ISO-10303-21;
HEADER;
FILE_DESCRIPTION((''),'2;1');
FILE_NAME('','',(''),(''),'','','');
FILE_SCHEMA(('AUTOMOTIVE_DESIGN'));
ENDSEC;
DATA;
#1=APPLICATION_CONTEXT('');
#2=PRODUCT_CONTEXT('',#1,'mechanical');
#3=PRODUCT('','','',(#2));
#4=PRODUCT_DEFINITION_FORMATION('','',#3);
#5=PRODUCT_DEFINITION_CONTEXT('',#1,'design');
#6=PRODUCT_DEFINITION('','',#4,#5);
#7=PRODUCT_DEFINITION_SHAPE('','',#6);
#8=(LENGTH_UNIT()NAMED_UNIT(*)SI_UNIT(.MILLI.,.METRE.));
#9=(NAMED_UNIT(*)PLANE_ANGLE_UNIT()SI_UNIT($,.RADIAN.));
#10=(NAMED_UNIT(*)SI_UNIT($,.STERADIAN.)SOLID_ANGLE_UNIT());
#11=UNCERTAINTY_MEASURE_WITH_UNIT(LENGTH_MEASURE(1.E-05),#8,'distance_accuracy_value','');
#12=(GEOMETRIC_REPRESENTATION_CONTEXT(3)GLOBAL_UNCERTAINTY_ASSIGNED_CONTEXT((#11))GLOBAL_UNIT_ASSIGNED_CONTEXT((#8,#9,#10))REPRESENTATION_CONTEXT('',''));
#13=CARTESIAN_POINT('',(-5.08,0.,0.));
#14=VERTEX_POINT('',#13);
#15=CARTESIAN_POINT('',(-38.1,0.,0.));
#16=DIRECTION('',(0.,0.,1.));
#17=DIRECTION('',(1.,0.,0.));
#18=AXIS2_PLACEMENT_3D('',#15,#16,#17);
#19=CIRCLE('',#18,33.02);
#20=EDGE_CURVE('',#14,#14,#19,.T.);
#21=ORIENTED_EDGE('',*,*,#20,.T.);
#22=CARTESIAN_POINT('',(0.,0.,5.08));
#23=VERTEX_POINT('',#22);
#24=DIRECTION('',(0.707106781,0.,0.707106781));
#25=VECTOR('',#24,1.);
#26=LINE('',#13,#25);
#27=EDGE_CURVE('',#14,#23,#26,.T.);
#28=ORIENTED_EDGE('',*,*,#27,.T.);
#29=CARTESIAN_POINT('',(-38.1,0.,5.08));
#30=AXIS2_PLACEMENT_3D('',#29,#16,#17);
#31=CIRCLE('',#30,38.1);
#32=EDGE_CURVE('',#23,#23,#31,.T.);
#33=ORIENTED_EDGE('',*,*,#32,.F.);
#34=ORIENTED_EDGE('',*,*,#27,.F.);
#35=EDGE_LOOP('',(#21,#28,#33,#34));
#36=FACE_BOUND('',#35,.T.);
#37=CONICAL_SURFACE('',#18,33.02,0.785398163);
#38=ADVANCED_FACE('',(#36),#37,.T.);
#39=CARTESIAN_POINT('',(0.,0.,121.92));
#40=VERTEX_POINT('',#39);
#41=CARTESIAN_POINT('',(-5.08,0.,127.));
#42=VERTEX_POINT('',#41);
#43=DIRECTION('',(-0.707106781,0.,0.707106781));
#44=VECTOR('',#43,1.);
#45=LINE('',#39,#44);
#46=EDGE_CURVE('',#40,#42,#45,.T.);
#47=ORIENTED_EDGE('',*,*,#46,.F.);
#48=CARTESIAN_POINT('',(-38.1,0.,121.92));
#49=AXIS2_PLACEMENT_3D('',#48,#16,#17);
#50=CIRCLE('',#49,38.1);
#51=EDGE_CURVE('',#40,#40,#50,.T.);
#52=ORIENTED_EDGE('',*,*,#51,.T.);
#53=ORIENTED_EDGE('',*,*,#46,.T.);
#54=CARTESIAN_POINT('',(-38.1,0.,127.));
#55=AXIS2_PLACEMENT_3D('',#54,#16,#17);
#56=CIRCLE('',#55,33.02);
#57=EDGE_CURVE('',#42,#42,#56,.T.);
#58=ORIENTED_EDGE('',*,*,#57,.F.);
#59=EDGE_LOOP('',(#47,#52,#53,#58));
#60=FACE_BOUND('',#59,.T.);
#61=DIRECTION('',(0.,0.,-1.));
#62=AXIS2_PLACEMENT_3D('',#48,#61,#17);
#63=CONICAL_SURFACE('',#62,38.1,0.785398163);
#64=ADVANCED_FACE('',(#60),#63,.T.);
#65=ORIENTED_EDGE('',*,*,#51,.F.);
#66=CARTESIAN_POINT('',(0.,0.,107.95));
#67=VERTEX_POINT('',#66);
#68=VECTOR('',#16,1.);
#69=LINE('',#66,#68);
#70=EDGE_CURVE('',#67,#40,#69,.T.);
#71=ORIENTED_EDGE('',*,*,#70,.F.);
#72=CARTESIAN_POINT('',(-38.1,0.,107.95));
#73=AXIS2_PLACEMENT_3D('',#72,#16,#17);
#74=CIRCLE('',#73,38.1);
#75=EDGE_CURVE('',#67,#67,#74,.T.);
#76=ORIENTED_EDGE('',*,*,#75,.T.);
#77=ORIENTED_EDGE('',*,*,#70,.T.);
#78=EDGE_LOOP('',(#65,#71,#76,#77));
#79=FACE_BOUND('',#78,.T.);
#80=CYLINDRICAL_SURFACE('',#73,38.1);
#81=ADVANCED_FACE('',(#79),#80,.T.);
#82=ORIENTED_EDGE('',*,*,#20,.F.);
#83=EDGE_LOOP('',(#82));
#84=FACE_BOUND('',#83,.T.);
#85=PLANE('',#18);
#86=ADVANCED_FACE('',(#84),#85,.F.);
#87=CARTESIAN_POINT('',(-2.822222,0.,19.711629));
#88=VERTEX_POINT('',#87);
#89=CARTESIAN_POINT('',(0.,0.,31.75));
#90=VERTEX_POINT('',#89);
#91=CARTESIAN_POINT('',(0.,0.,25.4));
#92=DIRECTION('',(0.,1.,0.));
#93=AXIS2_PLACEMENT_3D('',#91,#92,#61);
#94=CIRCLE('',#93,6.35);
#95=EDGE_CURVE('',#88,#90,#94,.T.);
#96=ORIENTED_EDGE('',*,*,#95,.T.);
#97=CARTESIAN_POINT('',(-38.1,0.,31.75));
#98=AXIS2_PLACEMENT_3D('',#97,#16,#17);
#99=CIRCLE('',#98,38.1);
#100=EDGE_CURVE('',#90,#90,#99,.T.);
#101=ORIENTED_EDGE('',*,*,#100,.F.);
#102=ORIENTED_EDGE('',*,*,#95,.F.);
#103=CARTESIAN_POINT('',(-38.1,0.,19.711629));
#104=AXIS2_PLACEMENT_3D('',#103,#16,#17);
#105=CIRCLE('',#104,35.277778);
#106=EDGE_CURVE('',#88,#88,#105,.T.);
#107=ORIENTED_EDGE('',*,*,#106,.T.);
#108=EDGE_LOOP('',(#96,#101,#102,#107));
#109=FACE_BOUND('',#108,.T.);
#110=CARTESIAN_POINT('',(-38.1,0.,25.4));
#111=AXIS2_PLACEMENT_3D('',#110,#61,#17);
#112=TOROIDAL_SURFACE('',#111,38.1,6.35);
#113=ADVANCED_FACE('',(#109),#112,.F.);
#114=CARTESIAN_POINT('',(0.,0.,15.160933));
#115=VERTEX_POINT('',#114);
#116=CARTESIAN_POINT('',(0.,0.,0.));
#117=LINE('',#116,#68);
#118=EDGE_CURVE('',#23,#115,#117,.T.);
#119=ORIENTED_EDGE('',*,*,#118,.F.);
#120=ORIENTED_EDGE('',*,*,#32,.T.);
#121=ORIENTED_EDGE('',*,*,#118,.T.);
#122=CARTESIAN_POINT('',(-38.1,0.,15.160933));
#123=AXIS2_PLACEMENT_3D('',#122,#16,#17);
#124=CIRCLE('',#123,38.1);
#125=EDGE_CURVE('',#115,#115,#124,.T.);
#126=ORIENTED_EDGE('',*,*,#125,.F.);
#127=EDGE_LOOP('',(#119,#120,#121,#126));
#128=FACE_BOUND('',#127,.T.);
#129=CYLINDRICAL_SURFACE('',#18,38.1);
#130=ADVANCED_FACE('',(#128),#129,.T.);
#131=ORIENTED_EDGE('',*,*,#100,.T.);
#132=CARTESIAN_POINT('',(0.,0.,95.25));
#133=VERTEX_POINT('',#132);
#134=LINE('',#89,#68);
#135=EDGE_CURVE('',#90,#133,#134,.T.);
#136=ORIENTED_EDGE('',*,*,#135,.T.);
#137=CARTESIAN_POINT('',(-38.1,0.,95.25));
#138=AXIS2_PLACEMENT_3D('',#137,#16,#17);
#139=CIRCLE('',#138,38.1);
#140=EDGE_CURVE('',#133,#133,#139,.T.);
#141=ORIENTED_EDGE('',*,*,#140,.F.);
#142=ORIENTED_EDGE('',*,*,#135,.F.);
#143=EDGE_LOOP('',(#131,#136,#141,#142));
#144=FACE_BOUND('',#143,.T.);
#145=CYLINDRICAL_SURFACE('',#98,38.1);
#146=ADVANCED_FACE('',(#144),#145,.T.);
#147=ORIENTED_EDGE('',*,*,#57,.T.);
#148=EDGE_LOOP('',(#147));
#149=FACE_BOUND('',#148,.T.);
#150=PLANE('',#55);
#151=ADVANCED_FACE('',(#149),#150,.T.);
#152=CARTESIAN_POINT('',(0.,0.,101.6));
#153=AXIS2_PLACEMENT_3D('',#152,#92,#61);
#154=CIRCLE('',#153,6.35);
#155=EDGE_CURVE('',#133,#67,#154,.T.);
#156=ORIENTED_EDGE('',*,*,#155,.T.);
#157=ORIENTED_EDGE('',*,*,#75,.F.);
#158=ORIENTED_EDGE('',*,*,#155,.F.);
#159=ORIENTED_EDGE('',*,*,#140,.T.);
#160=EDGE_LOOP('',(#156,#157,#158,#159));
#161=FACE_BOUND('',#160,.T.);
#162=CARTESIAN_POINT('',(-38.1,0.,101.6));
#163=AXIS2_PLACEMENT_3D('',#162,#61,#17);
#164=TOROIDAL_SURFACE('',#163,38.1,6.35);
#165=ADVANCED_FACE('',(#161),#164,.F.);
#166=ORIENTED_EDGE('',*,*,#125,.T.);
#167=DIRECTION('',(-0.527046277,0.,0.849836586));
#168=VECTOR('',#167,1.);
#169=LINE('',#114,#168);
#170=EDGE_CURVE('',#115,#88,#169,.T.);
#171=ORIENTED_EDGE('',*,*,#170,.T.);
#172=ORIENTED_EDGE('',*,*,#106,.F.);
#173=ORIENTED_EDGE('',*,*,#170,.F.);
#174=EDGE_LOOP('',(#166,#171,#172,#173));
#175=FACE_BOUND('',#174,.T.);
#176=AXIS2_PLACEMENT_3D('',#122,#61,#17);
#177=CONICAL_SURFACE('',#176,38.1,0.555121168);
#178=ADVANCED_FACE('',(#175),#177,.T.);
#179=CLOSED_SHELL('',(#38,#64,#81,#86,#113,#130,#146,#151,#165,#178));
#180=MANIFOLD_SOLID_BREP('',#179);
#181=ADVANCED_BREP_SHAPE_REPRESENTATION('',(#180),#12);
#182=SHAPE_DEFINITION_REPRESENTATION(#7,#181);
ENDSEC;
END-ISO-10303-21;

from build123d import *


# Not quite as in the source:
# - a fillet or chamfer that OpenCascade refuses, or shapes differently, is made with other operations: its cross-section is extruded or revolved along the edge and cut away or added


with BuildPart() as f1:
    # F0 (on Front) → F1 (revolve)
    with BuildSketch(Plane.XZ):
        with BuildLine():
            Line((-38.1, 0), (0, 0))
            Line((0, 0), (0, 19.05))
            ThreePointArc((0, 19.05), (-6.35, 25.4), (0, 31.75))
            Line((0, 31.75), (0, 95.25))
            ThreePointArc((0, 95.25), (-6.35, 101.6), (0, 107.95))
            Line((0, 107.95), (0, 127))
            Line((0, 127), (-38.1, 127))
            Line((-38.1, 127), (-38.1, 0))
        make_face()
    revolve(axis=Axis((-38.1, 0, 63.5), (0, 0, 1)))

    # F2: chamfer of 5.08 on 4 edges, made by hand

    # F2_s1 → F2_t2 (revolve, cut)
    with BuildSketch(Plane.XZ):
        Polygon((0, 121.92), (-5.08, 127), (0, 127), align=None)
    revolve(axis=Axis((-38.1, 0, 127), (0, 0, 1)), mode=Mode.SUBTRACT)

    # F2_s3 → F2_t4 (revolve, cut)
    with BuildSketch(Plane.XZ):
        Polygon((-5.08, 0), (0, 5.08), (0, 0), align=None)
    revolve(axis=Axis((-38.1, 0, 0), (0, 0, 1)), mode=Mode.SUBTRACT)

    # F2_s5 → F2_t6 (revolve, cut)
    with BuildSketch(Plane.XZ):
        with BuildLine():
            Line((0, 15.1609326597), (-2.8222222222, 19.7116292554))
            ThreePointArc((-2.8222222222, 19.7116292554), (-1.5219513398, 19.2350860412), (0, 19.05))
            Line((0, 19.05), (0, 15.1609326597))
        make_face()
    revolve(axis=Axis((-38.1, 0, 19.05), (0, 0, 1)), mode=Mode.SUBTRACT)


solid = f1.part
